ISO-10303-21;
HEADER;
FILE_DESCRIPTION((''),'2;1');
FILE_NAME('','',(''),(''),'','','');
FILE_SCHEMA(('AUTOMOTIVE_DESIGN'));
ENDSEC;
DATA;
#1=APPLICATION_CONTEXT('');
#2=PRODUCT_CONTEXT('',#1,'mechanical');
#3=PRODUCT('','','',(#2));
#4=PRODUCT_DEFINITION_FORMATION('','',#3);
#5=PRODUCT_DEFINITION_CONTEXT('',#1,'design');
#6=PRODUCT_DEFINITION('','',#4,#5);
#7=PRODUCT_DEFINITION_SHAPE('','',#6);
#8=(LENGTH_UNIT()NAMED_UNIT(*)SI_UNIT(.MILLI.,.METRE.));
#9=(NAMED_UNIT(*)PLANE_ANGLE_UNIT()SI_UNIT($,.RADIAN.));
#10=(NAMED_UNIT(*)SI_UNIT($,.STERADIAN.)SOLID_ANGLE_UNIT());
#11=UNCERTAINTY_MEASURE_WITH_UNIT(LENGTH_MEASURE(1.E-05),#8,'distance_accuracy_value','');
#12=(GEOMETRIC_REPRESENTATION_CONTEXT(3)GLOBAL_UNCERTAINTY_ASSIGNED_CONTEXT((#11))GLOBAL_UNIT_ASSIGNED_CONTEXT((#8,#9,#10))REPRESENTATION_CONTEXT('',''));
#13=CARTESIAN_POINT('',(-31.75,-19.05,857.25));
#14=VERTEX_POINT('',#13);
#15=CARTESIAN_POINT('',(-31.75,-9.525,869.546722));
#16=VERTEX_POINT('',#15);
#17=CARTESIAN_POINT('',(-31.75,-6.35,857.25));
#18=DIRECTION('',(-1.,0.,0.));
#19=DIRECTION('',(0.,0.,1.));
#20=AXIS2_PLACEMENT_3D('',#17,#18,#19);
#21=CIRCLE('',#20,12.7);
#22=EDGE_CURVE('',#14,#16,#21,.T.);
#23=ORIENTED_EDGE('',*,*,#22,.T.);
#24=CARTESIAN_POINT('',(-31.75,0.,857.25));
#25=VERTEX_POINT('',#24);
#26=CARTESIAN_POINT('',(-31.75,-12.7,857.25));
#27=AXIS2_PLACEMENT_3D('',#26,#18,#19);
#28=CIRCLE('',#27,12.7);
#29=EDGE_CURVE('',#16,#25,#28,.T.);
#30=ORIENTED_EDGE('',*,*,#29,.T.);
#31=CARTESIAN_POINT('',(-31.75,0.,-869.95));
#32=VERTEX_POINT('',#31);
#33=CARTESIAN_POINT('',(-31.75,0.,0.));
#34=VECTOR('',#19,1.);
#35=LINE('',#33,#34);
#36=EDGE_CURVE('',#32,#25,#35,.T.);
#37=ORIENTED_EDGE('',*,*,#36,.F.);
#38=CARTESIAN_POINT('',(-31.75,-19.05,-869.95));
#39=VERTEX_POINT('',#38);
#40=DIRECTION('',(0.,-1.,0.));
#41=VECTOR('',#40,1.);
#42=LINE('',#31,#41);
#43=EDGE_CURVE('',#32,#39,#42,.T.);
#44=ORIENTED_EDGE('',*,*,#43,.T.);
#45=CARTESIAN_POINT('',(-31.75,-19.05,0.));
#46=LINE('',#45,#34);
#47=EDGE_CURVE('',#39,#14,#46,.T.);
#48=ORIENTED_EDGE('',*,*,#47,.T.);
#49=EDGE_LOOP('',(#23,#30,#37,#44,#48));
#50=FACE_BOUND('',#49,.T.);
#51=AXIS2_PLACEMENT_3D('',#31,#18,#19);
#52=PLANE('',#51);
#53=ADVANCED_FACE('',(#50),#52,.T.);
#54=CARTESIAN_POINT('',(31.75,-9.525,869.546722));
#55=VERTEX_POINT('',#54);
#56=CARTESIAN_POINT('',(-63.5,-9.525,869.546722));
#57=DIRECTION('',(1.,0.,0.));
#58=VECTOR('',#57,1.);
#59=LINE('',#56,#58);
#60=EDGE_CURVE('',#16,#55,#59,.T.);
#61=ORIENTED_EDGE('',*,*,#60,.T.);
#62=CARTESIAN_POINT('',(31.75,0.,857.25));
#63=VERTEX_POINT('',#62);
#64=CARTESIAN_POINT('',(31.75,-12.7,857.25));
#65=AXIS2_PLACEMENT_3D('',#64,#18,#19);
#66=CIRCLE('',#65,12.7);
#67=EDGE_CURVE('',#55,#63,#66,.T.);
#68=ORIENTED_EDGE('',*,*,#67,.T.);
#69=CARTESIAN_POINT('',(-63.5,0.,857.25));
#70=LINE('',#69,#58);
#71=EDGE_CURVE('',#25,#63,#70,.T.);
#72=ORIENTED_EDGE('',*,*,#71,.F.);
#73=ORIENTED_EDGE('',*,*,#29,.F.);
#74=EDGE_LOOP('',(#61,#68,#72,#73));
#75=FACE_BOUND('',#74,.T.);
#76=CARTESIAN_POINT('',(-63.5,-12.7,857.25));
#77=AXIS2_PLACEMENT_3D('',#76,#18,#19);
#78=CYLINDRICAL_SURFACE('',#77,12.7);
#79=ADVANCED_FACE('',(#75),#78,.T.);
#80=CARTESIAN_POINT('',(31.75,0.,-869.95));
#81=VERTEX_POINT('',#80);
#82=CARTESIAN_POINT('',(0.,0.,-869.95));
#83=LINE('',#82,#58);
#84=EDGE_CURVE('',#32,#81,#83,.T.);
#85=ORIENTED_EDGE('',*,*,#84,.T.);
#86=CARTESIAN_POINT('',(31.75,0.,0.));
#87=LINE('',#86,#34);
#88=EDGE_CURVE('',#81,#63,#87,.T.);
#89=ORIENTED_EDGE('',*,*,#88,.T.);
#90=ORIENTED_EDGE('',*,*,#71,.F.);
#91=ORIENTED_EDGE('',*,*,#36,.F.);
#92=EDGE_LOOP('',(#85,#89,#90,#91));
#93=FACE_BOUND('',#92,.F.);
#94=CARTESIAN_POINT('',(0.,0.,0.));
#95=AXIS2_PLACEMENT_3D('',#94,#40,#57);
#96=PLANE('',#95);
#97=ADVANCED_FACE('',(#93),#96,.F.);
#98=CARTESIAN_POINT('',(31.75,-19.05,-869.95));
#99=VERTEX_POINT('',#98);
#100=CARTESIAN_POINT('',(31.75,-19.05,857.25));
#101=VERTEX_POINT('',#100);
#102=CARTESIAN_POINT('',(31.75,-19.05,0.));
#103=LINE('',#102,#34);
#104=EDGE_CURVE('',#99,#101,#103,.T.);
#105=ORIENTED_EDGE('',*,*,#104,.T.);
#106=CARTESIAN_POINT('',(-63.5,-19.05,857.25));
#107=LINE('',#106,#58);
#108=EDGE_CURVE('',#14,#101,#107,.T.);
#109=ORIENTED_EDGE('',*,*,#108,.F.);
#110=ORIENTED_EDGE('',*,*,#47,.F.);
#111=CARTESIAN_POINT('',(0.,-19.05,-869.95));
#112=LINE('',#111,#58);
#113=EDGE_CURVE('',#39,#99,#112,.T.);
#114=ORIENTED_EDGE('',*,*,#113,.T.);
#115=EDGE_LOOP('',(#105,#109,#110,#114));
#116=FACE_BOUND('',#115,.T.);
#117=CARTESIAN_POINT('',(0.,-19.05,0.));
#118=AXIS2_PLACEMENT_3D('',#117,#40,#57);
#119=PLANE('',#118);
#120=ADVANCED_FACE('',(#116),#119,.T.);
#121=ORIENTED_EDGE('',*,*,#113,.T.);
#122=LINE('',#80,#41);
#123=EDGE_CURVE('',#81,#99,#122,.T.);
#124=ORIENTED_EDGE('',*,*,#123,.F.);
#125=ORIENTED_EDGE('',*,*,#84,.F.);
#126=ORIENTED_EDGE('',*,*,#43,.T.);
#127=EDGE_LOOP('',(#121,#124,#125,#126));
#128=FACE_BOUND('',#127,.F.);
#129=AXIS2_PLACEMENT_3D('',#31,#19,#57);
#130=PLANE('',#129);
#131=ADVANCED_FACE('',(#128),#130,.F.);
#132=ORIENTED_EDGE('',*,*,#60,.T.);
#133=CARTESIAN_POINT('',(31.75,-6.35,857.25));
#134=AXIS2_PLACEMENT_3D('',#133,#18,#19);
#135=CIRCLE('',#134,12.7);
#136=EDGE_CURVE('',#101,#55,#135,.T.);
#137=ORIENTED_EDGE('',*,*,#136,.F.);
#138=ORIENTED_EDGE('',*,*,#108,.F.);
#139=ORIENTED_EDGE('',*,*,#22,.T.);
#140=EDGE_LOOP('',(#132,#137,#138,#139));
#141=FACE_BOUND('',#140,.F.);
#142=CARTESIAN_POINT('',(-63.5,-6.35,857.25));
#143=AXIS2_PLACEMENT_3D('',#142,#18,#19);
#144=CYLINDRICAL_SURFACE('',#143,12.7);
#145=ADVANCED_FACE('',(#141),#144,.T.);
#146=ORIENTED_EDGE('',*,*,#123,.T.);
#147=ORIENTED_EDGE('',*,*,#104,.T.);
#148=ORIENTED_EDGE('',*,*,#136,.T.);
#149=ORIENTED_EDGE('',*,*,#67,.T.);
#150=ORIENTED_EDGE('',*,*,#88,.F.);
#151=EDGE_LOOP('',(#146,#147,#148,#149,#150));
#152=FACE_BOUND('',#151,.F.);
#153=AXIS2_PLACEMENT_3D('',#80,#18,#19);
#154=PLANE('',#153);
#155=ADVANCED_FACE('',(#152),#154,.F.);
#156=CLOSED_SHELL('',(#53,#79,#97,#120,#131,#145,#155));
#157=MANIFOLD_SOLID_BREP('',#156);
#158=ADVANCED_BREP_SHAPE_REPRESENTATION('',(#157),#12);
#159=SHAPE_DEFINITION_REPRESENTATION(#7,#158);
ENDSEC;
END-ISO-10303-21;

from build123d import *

# Parameters (mm, degrees)
F0_W        = 63.5
F0_H        = 1739.9
F1_DEPTH    = 19.05
F2_T1_DEPTH = 127


# Not quite as in the source:
# - a fillet or chamfer that OpenCascade refuses, or shapes differently, is made with other operations: its cross-section is extruded or revolved along the edge and cut away or added


with BuildPart() as f1:
    # F0 (on Front) → F1 (new body)
    with BuildSketch(Plane.XZ):
        Rectangle(F0_W, F0_H)
    extrude(amount=F1_DEPTH)

    # F2: fillet of radius 12.7 on 2 edges, made by hand

    # F2_s2 → F2_t1 (cut)
    with BuildSketch(Plane.YZ.offset(-63.5)):
        with BuildLine():
            ThreePointArc((-6.35, 869.95), (-15.3302561211, 866.2302561211), (-19.05, 857.25))
            Line((-19.05, 857.25), (-19.05, 869.95))
            Line((-19.05, 869.95), (-6.35, 869.95))
        make_face()
        with BuildLine():
            ThreePointArc((-12.7, 869.95), (-3.7197438789, 866.2302561211), (0, 857.25))
            Line((0, 857.25), (0, 869.95))
            Line((0, 869.95), (-12.7, 869.95))
        make_face()
    extrude(amount=F2_T1_DEPTH, mode=Mode.SUBTRACT)


solid = f1.part
